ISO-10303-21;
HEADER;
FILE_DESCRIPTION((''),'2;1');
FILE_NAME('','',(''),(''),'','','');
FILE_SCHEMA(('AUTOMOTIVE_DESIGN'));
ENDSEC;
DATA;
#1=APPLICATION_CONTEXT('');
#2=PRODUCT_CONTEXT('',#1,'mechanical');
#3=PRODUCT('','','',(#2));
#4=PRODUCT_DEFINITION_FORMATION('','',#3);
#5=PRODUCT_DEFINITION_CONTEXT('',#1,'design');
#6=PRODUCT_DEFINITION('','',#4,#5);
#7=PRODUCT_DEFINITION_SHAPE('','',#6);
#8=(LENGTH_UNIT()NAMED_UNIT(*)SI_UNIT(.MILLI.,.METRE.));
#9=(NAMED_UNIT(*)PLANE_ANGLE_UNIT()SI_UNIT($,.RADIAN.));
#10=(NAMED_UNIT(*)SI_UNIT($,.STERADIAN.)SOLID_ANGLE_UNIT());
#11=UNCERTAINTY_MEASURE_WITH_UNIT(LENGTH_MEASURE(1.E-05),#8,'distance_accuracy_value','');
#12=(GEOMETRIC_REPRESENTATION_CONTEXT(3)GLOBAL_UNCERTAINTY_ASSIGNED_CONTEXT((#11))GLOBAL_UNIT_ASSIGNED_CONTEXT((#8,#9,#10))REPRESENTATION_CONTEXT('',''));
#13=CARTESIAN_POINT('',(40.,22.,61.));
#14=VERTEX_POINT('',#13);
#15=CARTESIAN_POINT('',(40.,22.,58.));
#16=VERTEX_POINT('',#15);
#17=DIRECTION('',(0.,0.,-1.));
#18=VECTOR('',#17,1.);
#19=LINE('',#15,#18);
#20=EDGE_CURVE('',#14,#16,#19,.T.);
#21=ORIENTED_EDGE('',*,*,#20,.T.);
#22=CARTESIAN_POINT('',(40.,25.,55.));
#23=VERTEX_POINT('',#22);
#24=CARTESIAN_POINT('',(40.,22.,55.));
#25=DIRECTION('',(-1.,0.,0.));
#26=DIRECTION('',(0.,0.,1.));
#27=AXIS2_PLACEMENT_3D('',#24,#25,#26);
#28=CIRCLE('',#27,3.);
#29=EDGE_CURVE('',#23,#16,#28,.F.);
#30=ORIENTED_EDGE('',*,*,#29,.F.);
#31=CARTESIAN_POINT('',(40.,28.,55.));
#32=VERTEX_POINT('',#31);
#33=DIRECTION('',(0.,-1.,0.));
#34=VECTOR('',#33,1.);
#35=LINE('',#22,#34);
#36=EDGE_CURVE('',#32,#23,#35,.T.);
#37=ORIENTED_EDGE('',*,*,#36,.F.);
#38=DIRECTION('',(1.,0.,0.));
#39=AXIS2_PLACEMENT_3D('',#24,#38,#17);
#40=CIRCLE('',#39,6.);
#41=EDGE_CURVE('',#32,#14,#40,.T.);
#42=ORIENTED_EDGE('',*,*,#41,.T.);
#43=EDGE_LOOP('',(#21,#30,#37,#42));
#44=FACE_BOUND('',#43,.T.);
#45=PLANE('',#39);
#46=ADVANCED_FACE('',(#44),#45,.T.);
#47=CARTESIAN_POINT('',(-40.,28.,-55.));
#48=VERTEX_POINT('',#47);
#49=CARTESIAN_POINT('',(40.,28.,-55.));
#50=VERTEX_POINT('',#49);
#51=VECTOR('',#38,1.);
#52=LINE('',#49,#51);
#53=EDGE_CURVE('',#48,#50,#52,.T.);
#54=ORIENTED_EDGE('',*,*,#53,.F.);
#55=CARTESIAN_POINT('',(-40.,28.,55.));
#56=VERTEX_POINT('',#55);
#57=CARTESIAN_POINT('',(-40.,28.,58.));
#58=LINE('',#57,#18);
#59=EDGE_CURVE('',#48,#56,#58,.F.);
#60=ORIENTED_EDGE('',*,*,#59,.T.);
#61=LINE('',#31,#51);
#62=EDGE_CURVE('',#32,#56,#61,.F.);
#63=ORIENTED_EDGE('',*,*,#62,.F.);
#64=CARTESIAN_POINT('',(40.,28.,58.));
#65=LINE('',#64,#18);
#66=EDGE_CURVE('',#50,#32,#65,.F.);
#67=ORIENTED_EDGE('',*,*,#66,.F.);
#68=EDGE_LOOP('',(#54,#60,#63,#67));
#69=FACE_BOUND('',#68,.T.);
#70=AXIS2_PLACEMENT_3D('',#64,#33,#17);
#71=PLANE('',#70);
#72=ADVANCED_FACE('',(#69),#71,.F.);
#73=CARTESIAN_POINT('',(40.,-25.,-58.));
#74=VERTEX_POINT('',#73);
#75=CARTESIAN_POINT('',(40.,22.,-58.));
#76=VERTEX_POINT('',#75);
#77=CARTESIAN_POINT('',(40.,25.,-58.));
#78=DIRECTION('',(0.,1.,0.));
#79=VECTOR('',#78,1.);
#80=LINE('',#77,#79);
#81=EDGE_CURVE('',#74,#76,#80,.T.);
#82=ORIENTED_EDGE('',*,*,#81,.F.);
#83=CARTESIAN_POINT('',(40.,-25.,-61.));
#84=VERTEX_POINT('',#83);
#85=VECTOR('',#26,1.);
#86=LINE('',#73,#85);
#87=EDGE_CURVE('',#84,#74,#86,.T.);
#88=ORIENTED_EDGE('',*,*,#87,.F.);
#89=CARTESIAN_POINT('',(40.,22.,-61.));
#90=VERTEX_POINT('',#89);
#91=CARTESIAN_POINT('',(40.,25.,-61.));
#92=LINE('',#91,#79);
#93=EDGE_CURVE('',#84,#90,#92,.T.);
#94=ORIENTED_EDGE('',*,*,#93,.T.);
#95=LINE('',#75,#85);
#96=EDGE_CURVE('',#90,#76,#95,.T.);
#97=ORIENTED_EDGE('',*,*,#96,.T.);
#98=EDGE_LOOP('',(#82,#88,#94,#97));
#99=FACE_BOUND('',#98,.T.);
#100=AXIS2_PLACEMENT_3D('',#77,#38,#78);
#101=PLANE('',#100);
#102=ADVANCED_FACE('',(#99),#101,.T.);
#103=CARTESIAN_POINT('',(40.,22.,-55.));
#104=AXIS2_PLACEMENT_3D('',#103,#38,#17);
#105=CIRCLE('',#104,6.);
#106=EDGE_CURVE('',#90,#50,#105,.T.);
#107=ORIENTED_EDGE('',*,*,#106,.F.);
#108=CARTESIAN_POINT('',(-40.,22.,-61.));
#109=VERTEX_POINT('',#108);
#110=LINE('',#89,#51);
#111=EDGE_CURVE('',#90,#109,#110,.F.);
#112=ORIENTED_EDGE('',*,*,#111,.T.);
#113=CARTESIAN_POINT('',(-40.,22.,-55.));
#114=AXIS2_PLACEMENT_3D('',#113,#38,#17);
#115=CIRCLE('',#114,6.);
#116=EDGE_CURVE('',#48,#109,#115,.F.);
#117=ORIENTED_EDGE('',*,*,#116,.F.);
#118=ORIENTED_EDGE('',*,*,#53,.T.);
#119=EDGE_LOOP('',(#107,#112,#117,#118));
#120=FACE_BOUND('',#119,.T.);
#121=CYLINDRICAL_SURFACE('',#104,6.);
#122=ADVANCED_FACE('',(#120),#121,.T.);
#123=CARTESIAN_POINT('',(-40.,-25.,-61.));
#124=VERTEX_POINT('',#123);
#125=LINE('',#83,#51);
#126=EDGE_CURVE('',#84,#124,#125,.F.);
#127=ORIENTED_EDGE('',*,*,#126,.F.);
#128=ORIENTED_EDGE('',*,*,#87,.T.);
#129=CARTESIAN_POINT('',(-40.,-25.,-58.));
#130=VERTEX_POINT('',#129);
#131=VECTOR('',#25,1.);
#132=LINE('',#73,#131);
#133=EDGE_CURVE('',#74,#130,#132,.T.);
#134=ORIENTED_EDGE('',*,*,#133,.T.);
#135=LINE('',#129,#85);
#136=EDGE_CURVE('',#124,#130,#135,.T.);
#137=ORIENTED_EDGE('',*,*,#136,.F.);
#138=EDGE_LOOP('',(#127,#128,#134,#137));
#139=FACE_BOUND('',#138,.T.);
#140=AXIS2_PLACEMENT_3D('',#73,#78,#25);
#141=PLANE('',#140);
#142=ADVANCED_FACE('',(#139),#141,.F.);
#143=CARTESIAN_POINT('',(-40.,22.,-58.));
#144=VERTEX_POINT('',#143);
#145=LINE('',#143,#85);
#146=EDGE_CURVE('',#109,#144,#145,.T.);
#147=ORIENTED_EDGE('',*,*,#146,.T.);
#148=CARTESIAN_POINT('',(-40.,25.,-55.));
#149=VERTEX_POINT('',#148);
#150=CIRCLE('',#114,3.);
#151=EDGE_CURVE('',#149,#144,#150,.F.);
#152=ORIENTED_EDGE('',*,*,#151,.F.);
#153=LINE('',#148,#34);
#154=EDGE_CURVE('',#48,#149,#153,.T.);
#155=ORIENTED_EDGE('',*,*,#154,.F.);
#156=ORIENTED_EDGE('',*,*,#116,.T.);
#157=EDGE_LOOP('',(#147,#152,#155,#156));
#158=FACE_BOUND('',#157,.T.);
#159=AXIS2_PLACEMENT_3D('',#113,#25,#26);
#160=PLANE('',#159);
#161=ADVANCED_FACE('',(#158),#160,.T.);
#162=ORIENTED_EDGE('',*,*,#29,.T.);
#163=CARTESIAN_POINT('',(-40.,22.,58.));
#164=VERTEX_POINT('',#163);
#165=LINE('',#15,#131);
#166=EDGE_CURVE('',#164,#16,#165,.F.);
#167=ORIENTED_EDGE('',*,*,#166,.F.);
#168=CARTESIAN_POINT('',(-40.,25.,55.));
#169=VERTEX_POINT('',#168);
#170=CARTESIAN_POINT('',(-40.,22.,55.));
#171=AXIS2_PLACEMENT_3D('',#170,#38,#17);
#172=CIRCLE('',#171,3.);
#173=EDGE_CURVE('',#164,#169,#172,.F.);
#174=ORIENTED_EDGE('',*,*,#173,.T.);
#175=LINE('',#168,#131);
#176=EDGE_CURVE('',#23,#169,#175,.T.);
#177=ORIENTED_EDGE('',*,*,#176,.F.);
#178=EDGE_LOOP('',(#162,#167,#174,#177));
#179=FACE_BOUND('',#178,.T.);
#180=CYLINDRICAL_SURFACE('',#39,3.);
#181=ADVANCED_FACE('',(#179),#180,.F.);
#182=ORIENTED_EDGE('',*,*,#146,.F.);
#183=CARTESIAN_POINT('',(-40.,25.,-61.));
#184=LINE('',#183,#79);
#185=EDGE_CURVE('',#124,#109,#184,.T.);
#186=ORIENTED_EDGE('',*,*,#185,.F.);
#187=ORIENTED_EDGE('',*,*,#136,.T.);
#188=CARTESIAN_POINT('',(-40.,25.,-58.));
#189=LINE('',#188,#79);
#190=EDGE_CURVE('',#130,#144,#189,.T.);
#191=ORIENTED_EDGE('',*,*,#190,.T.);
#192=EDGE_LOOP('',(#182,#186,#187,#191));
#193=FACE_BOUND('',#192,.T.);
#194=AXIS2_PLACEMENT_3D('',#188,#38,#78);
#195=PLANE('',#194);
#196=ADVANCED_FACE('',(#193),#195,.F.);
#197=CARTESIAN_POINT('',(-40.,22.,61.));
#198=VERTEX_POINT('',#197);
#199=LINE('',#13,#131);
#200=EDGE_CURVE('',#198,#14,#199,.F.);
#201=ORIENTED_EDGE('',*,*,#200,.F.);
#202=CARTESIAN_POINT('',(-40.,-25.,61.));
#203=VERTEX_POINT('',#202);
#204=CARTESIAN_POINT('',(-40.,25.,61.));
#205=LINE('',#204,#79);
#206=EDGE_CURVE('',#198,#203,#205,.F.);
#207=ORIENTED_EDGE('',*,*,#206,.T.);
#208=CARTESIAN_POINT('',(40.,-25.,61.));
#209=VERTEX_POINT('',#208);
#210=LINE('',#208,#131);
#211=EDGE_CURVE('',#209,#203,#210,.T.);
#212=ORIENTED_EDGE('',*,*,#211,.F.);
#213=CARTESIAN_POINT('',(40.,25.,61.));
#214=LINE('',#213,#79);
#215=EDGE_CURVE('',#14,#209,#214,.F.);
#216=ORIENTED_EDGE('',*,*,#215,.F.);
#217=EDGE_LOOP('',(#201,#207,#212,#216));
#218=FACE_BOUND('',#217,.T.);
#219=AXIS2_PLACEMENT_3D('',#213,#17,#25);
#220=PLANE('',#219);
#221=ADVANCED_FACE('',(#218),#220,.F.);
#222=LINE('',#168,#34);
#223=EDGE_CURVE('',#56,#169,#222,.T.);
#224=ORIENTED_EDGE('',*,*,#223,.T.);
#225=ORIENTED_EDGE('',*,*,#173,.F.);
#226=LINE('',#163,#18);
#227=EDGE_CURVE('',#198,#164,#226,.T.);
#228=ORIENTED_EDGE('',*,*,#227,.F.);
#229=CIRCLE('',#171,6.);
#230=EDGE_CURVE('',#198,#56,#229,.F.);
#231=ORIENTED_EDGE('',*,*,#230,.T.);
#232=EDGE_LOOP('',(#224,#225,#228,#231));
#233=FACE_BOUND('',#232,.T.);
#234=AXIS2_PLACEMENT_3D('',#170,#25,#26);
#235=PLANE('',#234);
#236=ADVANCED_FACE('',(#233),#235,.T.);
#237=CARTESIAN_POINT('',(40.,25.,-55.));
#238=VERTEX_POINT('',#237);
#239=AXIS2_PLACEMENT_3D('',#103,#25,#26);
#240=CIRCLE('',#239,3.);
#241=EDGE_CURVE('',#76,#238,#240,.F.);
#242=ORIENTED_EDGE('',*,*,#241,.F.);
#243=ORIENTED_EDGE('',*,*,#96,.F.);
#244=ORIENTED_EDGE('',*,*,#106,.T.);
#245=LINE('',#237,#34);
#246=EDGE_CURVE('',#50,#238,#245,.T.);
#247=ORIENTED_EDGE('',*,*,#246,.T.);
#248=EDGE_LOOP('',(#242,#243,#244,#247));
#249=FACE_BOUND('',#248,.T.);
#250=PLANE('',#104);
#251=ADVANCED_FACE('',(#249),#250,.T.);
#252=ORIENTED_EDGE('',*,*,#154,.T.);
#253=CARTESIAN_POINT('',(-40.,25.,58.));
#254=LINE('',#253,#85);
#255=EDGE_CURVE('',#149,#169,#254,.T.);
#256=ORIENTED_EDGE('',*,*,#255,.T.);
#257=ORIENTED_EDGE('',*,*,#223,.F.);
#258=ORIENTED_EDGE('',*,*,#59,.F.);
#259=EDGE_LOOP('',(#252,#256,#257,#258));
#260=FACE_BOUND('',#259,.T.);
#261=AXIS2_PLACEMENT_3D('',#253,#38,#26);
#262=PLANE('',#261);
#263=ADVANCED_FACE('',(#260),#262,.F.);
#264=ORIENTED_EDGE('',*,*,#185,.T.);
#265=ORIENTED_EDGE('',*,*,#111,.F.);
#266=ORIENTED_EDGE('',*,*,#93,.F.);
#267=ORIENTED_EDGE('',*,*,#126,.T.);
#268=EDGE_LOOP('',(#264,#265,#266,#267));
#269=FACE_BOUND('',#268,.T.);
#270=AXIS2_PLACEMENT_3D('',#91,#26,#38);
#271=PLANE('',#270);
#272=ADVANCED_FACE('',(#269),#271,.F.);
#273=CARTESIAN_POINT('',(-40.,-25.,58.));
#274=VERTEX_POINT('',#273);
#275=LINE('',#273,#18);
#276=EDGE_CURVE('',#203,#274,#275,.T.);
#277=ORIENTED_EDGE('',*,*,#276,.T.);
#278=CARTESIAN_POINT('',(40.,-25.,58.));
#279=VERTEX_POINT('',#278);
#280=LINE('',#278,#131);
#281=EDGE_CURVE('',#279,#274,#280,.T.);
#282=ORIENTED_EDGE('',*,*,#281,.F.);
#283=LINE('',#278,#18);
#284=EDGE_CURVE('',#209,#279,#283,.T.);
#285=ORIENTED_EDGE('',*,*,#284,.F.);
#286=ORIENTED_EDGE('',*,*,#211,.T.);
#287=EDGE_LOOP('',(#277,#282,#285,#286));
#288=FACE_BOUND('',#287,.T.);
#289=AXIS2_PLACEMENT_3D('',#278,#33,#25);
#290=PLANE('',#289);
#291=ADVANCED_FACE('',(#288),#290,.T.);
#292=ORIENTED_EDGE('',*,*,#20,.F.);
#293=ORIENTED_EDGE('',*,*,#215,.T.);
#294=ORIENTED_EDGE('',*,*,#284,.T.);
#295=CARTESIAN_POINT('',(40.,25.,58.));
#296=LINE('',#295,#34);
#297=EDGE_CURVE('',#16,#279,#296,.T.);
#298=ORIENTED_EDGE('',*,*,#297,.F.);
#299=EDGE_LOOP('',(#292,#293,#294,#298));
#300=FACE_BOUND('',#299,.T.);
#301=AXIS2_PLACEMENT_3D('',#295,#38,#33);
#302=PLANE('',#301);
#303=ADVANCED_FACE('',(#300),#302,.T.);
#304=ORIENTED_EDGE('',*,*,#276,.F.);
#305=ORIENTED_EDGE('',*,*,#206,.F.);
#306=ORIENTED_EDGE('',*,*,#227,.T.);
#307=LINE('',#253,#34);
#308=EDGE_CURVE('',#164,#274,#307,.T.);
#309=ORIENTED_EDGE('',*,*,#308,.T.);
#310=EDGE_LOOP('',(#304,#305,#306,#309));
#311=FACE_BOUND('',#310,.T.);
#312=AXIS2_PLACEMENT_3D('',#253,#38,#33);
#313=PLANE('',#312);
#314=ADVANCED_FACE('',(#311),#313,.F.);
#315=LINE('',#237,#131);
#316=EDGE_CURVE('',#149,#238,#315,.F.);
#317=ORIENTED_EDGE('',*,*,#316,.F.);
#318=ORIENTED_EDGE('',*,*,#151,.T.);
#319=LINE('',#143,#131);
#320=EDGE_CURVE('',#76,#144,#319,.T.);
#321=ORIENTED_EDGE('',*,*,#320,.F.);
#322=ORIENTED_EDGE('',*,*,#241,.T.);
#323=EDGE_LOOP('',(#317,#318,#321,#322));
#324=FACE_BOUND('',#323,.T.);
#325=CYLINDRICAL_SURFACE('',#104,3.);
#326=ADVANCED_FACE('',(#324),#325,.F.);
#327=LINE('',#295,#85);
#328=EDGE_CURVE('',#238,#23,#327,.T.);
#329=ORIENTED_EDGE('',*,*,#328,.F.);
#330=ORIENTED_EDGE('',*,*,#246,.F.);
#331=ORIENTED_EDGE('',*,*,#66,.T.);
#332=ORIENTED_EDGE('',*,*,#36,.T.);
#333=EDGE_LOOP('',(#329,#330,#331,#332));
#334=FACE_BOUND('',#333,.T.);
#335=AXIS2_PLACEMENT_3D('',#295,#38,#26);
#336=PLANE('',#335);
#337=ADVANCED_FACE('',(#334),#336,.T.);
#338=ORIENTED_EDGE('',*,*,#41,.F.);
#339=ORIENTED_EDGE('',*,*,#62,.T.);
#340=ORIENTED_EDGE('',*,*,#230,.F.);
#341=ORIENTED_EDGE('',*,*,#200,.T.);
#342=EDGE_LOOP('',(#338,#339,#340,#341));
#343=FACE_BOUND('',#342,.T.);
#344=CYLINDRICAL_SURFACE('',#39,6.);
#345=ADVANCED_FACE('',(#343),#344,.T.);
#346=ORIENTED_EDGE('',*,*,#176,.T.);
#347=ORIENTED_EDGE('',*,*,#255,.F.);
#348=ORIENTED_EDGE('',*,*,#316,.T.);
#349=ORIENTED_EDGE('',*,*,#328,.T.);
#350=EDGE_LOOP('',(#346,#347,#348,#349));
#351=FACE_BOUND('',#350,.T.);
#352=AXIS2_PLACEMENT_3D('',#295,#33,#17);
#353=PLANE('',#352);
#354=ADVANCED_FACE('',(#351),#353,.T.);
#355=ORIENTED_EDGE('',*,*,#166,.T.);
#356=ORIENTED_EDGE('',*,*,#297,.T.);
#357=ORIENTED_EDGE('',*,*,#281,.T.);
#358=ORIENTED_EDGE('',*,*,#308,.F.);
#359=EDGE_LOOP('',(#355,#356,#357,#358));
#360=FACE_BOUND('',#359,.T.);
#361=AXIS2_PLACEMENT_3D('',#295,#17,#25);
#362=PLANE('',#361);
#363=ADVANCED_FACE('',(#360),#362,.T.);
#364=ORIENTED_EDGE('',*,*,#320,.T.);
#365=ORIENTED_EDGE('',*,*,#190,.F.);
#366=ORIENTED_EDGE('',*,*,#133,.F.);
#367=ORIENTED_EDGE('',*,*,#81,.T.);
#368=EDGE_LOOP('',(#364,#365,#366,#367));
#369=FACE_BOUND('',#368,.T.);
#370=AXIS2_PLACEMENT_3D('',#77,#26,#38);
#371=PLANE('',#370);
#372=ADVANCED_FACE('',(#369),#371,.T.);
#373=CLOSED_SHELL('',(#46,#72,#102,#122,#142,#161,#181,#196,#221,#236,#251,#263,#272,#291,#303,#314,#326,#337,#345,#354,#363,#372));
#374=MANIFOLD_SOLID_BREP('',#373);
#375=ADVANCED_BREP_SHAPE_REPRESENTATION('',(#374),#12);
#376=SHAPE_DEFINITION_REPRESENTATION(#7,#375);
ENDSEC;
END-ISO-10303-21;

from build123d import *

# Parameters (mm, degrees)
EXTRUDE_1_DEPTH       = 40
SHEET_START           = -40
SHEET_METAL_1_DEPTH   = 80
SHEET_METAL_1_2_DEPTH = 80


# Read off the part's stored shape, not the designer's step: Преобразовать-Твердое тело1
with BuildPart() as part:
    # Sketch 1 → Вытянуть-Тонкостенный1 (new, symmetric)
    with BuildSketch(Plane(origin=(0, 0, 0), x_dir=(0, 0, -1), z_dir=(1, 0, 0))):
        Polygon((-58, -25), (-58, 25), (58, 25), (58, -25), (64, -25), (64, 31), (-64, 31), (-64, -25), align=None)
    extrude(amount=EXTRUDE_1_DEPTH, both=True)

    # Sheet Metal 1 outline → Sheet Metal 1 (cut)
    with BuildSketch(Plane.YZ.offset(SHEET_START)):
        with BuildLine():
            Line((-25, 64), (-25, 61))
            Line((-25, 61), (22, 61))
            ThreePointArc((22, 61), (26.242640687, 59.242640687), (28, 55))
            Line((28, 55), (28, -55))
            ThreePointArc((28, -55), (26.242640687, -59.242640687), (22, -61))
            Line((22, -61), (-25, -61))
            Line((-25, -61), (-25, -64))
            Line((-25, -64), (31, -64))
            Line((31, -64), (31, 64))
            Line((31, 64), (-25, 64))
        make_face()
    extrude(amount=SHEET_METAL_1_DEPTH, mode=Mode.SUBTRACT)

    # Sheet Metal 1 2 outline → Sheet Metal 1 2 (add)
    with BuildSketch(Plane.YZ.offset(SHEET_START)):
        with BuildLine():
            ThreePointArc((22, 58), (24.121320344, 57.121320344), (25, 55))
            Line((25, 55), (25, 58))
            Line((25, 58), (22, 58))
        make_face()
        with BuildLine():
            Line((25, -58), (25, -55))
            ThreePointArc((25, -55), (24.121320344, -57.121320344), (22, -58))
            Line((22, -58), (25, -58))
        make_face()
    extrude(amount=SHEET_METAL_1_2_DEPTH)


solid = part.part
